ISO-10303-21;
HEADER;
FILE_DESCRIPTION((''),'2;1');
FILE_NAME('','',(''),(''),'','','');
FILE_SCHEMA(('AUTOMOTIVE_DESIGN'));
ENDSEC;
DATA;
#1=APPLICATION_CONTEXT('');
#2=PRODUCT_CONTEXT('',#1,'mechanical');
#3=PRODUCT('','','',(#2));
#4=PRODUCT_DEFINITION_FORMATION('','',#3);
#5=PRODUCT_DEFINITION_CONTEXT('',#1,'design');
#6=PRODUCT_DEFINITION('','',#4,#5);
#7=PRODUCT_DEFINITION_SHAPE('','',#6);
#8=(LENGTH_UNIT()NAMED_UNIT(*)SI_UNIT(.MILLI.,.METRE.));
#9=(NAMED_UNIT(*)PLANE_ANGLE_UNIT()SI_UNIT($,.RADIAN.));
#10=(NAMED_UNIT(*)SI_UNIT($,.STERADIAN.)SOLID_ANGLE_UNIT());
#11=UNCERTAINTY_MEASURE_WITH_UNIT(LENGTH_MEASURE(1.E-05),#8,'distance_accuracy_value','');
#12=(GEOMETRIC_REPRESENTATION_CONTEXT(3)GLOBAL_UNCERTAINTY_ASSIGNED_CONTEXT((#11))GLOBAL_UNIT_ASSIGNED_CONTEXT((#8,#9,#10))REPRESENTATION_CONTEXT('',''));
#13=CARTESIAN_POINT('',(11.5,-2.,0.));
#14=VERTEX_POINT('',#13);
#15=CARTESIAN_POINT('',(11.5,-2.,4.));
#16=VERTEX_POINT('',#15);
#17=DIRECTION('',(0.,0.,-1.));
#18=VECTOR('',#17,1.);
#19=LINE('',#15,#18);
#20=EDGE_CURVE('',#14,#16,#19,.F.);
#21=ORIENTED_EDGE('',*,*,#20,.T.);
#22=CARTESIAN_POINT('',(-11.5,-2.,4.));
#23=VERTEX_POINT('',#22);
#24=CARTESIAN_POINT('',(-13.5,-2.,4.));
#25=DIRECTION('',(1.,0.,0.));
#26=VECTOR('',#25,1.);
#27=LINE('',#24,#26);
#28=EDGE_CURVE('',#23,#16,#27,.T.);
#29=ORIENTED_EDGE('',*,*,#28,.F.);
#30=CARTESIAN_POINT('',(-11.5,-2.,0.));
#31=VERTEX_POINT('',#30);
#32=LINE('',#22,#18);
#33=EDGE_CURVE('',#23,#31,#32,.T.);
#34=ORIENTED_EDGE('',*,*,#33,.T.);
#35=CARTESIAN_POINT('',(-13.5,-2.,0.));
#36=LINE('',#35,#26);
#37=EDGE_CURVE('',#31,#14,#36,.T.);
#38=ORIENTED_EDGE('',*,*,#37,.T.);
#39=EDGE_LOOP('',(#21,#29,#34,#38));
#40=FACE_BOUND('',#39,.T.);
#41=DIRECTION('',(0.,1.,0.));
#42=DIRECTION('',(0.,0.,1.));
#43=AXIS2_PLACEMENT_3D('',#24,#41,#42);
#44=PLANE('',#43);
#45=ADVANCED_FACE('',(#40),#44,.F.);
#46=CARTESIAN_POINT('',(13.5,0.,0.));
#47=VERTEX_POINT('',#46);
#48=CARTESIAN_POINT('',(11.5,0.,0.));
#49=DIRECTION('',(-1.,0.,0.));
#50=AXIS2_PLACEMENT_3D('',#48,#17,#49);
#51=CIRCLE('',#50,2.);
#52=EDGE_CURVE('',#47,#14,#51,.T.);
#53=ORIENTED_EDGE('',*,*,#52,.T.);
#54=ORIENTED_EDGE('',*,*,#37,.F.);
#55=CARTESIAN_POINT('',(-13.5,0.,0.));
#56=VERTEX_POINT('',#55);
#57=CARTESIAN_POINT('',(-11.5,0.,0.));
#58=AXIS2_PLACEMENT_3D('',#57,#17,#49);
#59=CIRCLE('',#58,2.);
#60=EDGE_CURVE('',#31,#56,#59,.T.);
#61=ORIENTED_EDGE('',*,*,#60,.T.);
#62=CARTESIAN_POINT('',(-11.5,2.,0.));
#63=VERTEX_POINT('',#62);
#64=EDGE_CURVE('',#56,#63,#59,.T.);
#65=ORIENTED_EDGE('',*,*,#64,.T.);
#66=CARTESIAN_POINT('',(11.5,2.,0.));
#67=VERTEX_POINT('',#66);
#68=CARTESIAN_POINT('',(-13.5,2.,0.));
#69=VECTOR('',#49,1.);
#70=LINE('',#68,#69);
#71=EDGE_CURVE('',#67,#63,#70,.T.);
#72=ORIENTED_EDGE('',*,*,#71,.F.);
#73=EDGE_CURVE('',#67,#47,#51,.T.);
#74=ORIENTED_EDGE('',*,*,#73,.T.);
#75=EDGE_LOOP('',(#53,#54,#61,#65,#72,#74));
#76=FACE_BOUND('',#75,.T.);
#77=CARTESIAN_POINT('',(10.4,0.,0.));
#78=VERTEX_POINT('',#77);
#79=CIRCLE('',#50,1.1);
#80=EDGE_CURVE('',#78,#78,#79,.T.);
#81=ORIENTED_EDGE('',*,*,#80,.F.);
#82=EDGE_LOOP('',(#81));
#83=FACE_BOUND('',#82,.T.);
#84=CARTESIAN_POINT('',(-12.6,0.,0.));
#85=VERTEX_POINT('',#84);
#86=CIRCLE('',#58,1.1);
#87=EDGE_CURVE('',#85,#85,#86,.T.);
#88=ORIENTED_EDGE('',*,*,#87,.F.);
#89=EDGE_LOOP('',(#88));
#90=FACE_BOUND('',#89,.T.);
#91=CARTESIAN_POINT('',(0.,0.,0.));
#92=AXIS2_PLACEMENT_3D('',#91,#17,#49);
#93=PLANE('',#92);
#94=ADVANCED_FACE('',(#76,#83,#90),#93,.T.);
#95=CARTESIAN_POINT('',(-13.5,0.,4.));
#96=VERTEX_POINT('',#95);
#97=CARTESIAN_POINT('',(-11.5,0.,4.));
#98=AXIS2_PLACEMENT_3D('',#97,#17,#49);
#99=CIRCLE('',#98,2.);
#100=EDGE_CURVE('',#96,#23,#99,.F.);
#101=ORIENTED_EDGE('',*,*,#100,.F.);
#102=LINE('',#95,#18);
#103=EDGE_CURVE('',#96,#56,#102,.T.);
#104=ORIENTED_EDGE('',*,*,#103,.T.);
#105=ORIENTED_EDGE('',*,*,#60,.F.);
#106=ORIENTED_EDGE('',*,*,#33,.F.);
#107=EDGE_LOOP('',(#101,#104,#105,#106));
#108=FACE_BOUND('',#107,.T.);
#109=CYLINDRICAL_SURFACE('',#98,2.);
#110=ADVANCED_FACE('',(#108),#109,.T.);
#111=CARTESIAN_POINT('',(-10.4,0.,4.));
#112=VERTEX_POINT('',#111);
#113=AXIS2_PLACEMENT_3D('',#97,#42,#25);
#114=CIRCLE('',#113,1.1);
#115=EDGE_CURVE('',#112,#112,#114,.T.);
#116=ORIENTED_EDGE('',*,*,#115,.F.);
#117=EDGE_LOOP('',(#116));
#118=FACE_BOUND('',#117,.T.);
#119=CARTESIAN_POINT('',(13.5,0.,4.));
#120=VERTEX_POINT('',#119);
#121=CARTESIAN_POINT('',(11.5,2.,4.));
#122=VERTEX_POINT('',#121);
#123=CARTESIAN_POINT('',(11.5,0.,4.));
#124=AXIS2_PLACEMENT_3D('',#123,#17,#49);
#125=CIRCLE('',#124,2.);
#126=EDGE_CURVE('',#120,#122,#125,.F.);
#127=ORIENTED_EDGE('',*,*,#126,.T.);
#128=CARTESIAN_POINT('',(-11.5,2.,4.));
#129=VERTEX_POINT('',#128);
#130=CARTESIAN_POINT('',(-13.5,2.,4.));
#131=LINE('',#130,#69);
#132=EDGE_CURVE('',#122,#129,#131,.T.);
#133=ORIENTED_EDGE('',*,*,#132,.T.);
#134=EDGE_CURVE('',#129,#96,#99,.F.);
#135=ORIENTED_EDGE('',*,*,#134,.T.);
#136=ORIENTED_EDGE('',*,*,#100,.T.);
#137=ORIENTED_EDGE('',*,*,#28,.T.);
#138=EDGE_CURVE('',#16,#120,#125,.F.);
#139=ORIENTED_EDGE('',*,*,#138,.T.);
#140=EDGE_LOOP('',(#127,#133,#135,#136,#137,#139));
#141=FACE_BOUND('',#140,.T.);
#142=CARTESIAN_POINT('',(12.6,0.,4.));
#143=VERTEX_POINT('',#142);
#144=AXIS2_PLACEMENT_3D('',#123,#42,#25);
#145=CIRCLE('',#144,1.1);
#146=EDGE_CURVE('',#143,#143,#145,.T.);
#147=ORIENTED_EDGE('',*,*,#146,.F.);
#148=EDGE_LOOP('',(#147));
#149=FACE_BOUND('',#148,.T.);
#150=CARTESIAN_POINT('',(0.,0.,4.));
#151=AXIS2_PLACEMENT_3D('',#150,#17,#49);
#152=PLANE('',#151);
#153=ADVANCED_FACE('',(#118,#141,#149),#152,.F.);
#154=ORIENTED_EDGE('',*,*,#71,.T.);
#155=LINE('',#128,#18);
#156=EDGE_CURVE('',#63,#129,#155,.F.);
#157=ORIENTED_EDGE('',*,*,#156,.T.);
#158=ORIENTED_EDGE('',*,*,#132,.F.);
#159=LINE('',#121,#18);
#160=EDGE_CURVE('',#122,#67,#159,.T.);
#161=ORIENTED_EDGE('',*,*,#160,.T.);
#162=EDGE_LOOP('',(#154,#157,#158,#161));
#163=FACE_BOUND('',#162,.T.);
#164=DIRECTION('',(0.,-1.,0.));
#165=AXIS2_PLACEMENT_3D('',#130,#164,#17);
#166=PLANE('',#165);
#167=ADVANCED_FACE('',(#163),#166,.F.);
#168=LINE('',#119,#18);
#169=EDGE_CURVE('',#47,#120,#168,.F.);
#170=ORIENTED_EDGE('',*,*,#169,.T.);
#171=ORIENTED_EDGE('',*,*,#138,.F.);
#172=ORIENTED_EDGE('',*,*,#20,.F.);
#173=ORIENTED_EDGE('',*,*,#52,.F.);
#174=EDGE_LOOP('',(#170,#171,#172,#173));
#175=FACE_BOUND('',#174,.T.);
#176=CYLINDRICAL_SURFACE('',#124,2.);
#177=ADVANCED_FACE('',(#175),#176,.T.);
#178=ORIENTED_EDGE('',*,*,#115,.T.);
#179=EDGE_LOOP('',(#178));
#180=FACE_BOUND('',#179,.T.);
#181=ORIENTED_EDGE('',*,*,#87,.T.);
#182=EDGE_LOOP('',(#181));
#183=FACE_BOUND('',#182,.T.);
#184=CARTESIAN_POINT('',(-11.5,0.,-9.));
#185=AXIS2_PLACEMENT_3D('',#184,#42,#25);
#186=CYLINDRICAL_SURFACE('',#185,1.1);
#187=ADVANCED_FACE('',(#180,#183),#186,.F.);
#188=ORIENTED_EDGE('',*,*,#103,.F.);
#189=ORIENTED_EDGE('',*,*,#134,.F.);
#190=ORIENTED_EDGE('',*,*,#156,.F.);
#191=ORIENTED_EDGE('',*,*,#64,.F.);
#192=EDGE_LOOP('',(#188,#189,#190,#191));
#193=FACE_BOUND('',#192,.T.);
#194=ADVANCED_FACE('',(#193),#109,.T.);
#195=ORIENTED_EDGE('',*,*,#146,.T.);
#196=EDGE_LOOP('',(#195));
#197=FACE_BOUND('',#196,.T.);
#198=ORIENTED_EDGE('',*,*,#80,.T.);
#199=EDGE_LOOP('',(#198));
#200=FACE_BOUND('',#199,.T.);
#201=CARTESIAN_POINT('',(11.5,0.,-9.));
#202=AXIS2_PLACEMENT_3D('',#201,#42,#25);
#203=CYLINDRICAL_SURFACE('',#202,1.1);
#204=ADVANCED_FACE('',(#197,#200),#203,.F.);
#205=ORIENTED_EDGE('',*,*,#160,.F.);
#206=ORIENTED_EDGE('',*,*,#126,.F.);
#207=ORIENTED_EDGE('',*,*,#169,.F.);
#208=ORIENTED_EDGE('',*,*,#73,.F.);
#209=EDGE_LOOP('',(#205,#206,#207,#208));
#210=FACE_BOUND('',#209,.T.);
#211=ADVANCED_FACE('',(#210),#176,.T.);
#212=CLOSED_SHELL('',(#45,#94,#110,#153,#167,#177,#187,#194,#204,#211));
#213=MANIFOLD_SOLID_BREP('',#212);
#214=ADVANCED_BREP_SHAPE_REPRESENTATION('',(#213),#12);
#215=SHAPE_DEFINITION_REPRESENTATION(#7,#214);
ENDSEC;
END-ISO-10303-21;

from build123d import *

# Parameters (mm, degrees)
SKETCH_1_W          = 27
SKETCH_1_H          = 4
EXTRUDE_1_DEPTH     = 4
FILLET_1_R          = 2
SKETCH_2_R          = 1.1
CUT_EXTRUDE_1_DEPTH = 13


with BuildPart() as part:
    # 草图1 → 凸台-拉伸1 (new body)
    with BuildSketch(Plane.XY):
        Rectangle(SKETCH_1_W, SKETCH_1_H)
    extrude(amount=EXTRUDE_1_DEPTH)

    # 圆角1
    fillet_1_edges = [part.edges().sort_by_distance(p)[0] for p in [
        (-13.5, -2, 2),
        (-13.5, 2, 2),
        (13.5, -2, 2),
        (13.5, 2, 2),
    ]]
    fillet(fillet_1_edges, radius=FILLET_1_R - 0.0001)  # a hair under: the kernel refuses the full size

    # 草图2 → 切除-拉伸1 (cut)
    with BuildSketch(Plane.XY.offset(4)):
        with Locations((-11.5, 0)):
            Circle(SKETCH_2_R)
        with Locations((11.5, 0)):
            Circle(SKETCH_2_R)
    extrude(amount=-CUT_EXTRUDE_1_DEPTH, mode=Mode.SUBTRACT)


solid = part.part
